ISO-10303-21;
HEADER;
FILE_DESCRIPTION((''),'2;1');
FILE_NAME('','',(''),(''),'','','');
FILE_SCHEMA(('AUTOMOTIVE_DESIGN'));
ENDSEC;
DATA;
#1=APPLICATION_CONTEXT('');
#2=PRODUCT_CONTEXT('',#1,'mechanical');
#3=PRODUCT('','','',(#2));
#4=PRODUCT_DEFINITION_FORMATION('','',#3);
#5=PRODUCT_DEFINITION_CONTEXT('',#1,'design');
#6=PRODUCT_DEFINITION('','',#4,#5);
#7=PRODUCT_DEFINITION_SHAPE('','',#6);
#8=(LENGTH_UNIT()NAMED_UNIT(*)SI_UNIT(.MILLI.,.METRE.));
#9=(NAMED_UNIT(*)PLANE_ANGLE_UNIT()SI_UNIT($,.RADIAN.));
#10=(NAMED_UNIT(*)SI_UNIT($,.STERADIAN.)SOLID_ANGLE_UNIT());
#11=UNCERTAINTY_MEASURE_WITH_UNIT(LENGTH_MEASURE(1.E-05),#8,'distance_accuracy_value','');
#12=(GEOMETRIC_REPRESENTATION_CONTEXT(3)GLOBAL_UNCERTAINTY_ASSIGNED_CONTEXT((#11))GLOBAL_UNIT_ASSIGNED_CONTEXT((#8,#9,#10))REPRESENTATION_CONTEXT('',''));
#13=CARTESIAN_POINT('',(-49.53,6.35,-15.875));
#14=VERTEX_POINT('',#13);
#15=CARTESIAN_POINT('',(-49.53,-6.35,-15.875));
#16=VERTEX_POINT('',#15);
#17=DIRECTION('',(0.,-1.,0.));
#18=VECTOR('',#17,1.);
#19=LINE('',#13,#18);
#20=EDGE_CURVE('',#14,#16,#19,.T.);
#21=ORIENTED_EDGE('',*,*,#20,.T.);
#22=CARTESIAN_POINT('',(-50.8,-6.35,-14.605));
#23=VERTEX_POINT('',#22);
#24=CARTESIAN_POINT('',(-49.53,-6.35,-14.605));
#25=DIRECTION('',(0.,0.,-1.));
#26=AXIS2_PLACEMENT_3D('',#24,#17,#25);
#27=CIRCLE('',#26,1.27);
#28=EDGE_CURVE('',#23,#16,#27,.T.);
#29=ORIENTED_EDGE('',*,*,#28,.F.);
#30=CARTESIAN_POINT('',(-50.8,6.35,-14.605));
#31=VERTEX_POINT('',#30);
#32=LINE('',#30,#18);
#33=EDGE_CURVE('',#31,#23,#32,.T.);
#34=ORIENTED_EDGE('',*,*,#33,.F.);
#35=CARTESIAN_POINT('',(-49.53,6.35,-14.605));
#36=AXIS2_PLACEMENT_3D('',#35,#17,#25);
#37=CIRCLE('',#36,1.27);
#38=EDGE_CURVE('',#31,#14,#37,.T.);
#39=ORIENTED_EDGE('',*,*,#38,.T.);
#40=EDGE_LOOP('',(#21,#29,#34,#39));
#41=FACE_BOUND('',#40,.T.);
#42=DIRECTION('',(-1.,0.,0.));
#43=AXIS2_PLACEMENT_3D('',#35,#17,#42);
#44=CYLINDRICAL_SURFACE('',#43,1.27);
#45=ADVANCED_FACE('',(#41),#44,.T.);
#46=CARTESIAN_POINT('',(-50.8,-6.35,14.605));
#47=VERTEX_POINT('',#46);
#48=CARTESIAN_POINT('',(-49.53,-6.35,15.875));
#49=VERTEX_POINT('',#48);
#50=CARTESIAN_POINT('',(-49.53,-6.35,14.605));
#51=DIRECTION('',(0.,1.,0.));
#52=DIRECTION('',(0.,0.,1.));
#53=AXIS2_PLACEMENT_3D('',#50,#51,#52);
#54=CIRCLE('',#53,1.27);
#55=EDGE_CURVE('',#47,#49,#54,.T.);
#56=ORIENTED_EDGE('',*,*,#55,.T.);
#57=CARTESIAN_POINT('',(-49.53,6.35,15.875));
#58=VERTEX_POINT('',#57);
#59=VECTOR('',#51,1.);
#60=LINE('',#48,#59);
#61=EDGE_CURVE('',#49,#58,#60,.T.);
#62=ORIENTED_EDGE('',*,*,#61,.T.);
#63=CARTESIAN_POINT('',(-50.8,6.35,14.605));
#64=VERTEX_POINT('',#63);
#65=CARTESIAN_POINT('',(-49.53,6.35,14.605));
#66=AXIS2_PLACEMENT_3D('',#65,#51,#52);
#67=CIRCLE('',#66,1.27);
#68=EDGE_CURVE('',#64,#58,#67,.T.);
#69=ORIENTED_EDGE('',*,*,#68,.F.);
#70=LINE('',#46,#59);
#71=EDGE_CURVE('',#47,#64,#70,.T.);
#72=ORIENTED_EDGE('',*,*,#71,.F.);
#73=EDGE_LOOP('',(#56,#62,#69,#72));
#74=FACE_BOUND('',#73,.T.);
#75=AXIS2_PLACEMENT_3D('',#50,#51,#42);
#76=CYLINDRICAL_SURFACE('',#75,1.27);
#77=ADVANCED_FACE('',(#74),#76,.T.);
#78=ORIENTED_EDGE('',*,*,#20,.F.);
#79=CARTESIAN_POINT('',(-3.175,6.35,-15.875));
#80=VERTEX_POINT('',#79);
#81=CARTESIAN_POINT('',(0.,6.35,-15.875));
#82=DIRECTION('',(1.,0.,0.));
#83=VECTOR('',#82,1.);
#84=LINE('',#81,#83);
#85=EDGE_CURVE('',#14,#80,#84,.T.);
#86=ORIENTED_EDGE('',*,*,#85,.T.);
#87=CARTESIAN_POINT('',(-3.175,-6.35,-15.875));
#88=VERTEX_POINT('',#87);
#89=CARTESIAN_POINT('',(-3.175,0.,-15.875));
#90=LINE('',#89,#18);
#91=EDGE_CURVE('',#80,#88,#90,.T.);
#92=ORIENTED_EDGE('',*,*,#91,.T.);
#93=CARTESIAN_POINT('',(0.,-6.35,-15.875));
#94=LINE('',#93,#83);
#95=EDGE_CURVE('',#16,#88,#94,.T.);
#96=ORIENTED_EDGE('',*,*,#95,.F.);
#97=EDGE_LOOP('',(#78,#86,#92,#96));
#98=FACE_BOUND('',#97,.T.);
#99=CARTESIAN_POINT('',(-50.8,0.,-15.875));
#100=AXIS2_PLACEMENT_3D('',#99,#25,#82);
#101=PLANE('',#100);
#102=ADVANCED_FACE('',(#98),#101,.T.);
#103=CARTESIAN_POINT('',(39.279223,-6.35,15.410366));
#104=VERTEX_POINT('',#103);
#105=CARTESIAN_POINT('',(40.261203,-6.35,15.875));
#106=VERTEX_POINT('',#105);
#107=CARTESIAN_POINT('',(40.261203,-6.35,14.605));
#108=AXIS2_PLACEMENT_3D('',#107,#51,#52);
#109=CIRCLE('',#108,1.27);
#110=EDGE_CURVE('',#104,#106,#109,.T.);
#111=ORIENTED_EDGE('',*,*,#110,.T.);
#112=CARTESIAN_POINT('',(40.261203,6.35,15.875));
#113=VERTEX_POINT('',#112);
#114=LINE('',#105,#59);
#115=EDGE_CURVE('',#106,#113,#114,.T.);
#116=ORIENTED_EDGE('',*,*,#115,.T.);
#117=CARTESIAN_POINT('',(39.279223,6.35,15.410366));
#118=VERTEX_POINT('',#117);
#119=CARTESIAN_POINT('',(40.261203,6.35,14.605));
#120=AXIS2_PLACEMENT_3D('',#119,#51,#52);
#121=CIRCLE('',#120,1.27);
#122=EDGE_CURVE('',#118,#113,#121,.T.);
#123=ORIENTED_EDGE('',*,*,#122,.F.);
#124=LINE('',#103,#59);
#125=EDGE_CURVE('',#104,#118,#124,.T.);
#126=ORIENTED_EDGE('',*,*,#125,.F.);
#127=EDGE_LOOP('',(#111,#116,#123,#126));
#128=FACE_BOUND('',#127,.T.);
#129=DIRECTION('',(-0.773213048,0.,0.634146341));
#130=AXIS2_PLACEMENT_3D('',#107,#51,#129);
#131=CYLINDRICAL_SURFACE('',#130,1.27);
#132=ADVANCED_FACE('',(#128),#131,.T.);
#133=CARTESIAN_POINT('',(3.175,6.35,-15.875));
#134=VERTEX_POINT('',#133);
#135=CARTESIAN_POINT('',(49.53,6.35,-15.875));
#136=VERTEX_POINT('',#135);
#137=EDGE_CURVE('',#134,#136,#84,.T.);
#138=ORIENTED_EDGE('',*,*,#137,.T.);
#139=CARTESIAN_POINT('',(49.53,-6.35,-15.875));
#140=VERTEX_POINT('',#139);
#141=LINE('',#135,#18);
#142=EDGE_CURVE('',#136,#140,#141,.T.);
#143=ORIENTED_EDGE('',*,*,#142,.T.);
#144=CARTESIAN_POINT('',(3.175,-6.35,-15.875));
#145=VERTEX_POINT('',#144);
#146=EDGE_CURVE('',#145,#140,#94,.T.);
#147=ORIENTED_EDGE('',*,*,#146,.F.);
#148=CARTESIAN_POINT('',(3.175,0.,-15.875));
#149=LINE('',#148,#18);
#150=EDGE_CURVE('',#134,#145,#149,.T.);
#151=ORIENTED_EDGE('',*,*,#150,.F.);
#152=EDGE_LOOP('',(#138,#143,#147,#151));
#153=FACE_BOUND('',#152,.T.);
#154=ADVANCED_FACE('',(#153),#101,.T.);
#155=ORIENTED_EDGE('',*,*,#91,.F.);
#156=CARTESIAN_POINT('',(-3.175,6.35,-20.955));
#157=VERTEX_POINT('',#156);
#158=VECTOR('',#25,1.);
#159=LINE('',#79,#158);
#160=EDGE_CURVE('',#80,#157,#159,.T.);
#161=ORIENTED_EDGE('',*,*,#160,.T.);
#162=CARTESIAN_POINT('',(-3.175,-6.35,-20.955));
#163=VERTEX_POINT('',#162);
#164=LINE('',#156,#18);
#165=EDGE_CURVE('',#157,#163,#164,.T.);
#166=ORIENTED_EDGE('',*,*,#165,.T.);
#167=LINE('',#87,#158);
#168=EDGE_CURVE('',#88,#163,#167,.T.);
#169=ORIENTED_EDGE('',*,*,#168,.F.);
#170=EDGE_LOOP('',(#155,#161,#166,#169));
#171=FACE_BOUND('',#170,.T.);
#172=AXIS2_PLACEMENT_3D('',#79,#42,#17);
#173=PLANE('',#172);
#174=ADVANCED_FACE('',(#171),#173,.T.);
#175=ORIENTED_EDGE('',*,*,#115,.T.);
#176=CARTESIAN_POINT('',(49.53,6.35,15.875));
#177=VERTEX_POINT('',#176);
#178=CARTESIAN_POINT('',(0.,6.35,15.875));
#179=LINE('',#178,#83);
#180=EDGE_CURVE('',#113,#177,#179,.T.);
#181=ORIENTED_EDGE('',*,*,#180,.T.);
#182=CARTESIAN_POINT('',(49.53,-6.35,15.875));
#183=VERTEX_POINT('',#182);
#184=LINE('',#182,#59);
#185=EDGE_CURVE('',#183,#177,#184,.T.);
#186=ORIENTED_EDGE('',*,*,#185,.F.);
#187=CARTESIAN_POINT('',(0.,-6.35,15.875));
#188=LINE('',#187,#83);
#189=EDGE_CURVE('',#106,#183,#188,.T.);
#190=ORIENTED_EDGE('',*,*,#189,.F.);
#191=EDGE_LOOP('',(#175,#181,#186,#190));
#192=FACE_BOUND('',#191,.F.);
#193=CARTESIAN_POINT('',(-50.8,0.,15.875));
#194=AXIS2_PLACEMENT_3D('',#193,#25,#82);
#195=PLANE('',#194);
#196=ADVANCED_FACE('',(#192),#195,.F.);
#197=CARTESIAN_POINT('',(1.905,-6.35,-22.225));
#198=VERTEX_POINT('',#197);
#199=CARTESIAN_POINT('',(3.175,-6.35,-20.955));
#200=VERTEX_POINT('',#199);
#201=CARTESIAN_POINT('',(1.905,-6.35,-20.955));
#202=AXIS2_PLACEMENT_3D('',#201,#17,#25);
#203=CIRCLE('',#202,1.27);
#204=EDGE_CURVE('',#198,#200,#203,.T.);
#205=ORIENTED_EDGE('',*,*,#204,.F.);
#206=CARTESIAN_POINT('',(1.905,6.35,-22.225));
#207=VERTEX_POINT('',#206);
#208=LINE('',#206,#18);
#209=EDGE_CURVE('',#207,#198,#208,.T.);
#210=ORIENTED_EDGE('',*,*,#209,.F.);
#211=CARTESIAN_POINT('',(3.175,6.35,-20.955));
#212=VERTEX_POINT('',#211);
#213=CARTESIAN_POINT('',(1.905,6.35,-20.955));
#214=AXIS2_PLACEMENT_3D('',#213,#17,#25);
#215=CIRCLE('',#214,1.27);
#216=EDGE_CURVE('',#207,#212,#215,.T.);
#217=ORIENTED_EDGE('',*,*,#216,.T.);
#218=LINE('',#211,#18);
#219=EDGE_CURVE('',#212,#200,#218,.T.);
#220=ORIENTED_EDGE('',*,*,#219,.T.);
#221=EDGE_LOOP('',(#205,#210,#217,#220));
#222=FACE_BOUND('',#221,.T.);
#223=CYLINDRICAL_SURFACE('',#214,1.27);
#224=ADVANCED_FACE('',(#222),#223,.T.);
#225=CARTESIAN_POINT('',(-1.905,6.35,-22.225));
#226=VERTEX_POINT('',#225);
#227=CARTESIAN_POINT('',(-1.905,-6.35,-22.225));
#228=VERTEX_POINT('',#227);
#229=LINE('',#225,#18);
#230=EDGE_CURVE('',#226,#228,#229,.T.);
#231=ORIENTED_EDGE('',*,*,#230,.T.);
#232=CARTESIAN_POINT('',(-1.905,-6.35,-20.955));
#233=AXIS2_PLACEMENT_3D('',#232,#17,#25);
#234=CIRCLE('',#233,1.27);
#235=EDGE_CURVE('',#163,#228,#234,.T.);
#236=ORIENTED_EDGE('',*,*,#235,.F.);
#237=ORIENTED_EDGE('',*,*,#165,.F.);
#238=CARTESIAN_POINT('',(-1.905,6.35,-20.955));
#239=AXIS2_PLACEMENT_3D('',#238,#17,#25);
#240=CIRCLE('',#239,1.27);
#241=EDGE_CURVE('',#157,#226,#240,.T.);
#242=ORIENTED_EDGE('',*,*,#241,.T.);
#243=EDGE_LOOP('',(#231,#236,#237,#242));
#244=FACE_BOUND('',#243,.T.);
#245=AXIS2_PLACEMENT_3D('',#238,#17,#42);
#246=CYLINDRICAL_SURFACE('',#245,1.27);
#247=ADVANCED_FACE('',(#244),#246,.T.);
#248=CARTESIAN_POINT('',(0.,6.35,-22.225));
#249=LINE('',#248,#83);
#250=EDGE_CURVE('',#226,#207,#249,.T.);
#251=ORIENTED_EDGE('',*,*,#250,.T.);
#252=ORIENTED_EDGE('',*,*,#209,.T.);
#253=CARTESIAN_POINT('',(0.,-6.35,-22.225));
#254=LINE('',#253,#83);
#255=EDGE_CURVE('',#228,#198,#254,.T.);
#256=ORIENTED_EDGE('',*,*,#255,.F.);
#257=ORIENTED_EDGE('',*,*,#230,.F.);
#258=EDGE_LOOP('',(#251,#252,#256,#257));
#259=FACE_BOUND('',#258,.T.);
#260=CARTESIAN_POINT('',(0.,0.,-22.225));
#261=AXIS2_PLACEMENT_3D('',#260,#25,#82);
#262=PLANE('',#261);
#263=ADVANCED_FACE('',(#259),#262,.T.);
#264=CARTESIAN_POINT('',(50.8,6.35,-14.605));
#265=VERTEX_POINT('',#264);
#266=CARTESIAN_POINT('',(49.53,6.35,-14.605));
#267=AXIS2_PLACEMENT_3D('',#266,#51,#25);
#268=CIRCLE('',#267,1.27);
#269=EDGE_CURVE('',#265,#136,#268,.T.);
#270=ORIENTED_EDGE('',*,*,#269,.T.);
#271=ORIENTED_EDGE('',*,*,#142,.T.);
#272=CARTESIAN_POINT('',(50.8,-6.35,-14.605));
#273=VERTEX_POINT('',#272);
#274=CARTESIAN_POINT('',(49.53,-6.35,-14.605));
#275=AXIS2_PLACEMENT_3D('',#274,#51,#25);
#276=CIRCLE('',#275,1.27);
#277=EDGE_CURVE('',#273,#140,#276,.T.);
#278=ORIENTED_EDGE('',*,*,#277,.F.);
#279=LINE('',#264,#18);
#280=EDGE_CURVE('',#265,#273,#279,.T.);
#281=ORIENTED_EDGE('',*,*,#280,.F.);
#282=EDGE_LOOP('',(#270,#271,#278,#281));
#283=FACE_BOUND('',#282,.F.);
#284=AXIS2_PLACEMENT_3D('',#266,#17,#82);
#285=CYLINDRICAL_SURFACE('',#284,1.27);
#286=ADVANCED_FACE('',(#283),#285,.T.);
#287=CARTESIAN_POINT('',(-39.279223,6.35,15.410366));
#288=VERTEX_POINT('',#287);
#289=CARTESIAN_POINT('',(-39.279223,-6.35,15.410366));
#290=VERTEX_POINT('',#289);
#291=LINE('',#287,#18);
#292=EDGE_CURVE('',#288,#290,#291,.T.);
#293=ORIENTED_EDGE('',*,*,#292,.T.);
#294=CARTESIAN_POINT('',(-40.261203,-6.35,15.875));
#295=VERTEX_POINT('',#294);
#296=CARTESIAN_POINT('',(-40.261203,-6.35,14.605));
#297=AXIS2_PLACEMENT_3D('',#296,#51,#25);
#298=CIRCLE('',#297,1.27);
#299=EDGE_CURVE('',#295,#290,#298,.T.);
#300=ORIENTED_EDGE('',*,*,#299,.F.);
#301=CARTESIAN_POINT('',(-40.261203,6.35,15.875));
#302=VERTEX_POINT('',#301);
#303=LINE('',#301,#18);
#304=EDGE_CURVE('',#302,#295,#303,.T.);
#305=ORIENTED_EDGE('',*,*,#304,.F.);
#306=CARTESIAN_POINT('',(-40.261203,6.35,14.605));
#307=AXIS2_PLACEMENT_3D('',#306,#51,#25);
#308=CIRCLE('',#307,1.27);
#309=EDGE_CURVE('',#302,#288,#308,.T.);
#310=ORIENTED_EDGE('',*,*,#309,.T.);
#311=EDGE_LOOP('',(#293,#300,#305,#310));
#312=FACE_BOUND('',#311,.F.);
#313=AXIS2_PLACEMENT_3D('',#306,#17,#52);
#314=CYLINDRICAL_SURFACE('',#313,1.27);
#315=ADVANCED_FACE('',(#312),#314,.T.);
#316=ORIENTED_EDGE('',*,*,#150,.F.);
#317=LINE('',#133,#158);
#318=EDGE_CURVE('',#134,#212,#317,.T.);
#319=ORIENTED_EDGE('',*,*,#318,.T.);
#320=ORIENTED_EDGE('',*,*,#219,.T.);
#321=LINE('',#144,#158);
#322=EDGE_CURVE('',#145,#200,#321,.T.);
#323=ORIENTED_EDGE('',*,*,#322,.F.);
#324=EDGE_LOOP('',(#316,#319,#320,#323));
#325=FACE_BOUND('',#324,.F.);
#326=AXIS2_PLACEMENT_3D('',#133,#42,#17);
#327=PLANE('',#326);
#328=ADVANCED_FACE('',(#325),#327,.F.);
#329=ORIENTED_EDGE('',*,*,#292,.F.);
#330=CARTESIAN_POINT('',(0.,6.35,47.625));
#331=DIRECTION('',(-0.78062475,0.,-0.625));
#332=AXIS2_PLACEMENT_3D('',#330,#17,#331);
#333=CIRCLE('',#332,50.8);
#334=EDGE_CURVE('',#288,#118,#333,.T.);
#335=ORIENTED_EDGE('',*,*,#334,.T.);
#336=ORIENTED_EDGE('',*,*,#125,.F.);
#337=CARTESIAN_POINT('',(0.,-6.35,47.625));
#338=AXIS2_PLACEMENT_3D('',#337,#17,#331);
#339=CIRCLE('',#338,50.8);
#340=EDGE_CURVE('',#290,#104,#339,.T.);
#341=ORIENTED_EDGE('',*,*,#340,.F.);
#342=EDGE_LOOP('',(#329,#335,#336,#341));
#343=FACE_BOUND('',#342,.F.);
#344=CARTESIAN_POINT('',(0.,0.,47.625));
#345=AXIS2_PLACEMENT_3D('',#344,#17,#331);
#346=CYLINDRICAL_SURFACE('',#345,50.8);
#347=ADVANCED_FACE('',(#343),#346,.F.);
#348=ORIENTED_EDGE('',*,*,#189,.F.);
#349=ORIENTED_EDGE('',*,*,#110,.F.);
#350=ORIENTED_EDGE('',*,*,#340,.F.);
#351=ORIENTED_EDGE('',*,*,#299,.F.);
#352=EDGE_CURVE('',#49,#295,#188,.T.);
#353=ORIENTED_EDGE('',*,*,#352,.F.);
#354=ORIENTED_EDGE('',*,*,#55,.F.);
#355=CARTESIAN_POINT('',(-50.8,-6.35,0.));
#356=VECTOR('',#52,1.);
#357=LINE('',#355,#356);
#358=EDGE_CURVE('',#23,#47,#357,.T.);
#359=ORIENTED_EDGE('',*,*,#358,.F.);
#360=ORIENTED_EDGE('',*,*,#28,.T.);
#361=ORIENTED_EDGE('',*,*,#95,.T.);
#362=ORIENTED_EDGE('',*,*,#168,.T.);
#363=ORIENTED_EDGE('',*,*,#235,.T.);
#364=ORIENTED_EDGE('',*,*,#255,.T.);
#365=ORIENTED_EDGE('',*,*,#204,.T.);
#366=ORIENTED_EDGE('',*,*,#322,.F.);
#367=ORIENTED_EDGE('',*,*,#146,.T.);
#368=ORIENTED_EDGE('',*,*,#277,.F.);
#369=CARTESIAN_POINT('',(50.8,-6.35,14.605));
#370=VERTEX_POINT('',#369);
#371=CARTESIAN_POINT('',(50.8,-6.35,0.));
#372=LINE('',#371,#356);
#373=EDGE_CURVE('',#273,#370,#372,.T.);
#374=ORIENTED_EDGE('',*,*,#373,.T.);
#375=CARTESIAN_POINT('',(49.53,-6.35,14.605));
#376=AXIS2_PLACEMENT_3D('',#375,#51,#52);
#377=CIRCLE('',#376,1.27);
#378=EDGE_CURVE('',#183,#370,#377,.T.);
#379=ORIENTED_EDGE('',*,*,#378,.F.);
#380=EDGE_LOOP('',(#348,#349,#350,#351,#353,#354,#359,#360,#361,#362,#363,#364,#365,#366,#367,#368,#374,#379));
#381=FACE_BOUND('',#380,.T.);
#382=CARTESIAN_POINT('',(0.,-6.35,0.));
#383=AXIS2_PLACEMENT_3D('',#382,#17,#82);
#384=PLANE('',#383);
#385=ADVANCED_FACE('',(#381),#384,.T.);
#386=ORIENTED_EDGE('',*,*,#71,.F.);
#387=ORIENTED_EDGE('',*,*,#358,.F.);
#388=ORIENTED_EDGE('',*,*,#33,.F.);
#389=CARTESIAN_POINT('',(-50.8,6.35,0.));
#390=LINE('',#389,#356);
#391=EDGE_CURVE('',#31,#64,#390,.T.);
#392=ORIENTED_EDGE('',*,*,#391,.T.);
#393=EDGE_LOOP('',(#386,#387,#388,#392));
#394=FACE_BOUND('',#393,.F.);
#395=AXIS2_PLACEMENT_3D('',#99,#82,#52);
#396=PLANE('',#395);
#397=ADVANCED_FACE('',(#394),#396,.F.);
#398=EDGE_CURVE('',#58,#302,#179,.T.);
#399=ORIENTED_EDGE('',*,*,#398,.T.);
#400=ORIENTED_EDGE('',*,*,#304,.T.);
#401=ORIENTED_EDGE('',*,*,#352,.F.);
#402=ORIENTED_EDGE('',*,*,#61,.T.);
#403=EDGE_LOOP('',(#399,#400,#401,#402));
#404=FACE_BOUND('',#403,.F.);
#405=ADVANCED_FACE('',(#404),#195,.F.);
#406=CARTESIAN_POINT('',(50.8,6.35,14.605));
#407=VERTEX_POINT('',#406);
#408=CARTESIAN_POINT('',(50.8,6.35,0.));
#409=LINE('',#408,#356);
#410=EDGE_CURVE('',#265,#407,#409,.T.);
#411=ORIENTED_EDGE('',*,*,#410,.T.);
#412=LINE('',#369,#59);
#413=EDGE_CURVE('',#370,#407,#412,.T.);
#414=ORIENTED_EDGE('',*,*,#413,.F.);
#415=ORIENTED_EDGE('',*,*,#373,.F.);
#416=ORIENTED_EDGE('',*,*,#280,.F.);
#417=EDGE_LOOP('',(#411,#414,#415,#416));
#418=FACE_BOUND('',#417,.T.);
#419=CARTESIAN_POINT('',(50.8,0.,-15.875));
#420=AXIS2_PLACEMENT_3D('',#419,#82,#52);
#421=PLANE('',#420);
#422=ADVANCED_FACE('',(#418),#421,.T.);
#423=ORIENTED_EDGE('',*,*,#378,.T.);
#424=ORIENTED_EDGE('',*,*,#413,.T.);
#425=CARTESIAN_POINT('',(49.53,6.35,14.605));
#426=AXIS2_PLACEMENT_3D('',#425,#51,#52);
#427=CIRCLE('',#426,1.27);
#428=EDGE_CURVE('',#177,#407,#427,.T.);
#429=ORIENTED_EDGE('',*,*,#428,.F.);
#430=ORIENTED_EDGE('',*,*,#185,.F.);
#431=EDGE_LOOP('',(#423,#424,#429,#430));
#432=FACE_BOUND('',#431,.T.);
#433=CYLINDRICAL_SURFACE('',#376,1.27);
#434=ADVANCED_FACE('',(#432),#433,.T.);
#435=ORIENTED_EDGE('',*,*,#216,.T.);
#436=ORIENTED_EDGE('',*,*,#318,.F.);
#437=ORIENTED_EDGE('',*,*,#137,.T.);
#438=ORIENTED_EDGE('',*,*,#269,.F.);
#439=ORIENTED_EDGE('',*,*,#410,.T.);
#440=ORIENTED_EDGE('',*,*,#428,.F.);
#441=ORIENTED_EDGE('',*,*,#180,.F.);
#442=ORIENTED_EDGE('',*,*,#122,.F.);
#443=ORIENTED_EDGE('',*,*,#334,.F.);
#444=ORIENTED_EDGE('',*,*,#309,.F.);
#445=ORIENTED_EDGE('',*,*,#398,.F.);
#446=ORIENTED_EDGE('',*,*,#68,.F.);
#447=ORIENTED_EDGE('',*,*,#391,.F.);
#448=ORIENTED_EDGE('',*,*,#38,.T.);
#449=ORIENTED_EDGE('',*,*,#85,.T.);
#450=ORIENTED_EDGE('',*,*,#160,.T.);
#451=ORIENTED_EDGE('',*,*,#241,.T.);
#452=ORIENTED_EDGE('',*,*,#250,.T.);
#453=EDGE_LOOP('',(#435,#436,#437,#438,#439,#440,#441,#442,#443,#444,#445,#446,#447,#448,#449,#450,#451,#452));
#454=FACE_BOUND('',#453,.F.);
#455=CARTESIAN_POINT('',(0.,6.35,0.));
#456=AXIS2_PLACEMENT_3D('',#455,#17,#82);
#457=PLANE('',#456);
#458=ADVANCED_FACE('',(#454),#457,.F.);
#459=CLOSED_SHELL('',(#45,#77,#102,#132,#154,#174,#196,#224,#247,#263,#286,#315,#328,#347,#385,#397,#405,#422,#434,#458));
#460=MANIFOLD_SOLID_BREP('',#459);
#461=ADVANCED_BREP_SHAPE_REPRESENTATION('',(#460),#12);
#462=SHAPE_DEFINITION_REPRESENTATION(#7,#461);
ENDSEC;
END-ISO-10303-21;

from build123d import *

# Parameters (mm, degrees)
F0_W     = 101.6
F0_H     = 31.75
F1_DEPTH = 6.35
F3_DEPTH = 12.7
F4_W     = 6.35
F4_H     = 12.7
F5_DEPTH = 6.35
F6_R     = 1.27


with BuildPart() as f1:
    # F0 (on Front) → F1 (new body, symmetric)
    with BuildSketch(Plane.XZ):
        Rectangle(F0_W, F0_H)
    extrude(amount=F1_DEPTH, both=True)

    # F2 (on Front) → F3 (cut, symmetric)
    with BuildSketch(Plane.XZ):
        with BuildLine():
            Line((39.6557372898, 15.875), (-39.6557372898, 15.875))
            ThreePointArc((-39.6557372898, 15.875), (0, -3.175), (39.6557372898, 15.875))
        make_face()
    extrude(amount=F3_DEPTH, both=True, mode=Mode.SUBTRACT)

    # F4 (on face) → F5 (join)
    with BuildSketch(Plane(origin=(0, 0, -15.875), x_dir=(1, 0, 0), z_dir=(0, 0, -1))):
        Rectangle(F4_W, F4_H)
    extrude(amount=F5_DEPTH)

    # F6
    f6_edges = [f1.edges().sort_by_distance(p)[0] for p in [
        (-3.175, 0, -22.225),
        (3.175, 0, -22.225),
        (-50.8, 0, -15.875),
        (-50.8, 0, 15.875),
        (-39.655737, 0, 15.875),
        (39.655737, 0, 15.875),
        (50.8, 0, 15.875),
        (50.8, 0, -15.875),
    ]]
    fillet(f6_edges, radius=F6_R)


solid = f1.part
